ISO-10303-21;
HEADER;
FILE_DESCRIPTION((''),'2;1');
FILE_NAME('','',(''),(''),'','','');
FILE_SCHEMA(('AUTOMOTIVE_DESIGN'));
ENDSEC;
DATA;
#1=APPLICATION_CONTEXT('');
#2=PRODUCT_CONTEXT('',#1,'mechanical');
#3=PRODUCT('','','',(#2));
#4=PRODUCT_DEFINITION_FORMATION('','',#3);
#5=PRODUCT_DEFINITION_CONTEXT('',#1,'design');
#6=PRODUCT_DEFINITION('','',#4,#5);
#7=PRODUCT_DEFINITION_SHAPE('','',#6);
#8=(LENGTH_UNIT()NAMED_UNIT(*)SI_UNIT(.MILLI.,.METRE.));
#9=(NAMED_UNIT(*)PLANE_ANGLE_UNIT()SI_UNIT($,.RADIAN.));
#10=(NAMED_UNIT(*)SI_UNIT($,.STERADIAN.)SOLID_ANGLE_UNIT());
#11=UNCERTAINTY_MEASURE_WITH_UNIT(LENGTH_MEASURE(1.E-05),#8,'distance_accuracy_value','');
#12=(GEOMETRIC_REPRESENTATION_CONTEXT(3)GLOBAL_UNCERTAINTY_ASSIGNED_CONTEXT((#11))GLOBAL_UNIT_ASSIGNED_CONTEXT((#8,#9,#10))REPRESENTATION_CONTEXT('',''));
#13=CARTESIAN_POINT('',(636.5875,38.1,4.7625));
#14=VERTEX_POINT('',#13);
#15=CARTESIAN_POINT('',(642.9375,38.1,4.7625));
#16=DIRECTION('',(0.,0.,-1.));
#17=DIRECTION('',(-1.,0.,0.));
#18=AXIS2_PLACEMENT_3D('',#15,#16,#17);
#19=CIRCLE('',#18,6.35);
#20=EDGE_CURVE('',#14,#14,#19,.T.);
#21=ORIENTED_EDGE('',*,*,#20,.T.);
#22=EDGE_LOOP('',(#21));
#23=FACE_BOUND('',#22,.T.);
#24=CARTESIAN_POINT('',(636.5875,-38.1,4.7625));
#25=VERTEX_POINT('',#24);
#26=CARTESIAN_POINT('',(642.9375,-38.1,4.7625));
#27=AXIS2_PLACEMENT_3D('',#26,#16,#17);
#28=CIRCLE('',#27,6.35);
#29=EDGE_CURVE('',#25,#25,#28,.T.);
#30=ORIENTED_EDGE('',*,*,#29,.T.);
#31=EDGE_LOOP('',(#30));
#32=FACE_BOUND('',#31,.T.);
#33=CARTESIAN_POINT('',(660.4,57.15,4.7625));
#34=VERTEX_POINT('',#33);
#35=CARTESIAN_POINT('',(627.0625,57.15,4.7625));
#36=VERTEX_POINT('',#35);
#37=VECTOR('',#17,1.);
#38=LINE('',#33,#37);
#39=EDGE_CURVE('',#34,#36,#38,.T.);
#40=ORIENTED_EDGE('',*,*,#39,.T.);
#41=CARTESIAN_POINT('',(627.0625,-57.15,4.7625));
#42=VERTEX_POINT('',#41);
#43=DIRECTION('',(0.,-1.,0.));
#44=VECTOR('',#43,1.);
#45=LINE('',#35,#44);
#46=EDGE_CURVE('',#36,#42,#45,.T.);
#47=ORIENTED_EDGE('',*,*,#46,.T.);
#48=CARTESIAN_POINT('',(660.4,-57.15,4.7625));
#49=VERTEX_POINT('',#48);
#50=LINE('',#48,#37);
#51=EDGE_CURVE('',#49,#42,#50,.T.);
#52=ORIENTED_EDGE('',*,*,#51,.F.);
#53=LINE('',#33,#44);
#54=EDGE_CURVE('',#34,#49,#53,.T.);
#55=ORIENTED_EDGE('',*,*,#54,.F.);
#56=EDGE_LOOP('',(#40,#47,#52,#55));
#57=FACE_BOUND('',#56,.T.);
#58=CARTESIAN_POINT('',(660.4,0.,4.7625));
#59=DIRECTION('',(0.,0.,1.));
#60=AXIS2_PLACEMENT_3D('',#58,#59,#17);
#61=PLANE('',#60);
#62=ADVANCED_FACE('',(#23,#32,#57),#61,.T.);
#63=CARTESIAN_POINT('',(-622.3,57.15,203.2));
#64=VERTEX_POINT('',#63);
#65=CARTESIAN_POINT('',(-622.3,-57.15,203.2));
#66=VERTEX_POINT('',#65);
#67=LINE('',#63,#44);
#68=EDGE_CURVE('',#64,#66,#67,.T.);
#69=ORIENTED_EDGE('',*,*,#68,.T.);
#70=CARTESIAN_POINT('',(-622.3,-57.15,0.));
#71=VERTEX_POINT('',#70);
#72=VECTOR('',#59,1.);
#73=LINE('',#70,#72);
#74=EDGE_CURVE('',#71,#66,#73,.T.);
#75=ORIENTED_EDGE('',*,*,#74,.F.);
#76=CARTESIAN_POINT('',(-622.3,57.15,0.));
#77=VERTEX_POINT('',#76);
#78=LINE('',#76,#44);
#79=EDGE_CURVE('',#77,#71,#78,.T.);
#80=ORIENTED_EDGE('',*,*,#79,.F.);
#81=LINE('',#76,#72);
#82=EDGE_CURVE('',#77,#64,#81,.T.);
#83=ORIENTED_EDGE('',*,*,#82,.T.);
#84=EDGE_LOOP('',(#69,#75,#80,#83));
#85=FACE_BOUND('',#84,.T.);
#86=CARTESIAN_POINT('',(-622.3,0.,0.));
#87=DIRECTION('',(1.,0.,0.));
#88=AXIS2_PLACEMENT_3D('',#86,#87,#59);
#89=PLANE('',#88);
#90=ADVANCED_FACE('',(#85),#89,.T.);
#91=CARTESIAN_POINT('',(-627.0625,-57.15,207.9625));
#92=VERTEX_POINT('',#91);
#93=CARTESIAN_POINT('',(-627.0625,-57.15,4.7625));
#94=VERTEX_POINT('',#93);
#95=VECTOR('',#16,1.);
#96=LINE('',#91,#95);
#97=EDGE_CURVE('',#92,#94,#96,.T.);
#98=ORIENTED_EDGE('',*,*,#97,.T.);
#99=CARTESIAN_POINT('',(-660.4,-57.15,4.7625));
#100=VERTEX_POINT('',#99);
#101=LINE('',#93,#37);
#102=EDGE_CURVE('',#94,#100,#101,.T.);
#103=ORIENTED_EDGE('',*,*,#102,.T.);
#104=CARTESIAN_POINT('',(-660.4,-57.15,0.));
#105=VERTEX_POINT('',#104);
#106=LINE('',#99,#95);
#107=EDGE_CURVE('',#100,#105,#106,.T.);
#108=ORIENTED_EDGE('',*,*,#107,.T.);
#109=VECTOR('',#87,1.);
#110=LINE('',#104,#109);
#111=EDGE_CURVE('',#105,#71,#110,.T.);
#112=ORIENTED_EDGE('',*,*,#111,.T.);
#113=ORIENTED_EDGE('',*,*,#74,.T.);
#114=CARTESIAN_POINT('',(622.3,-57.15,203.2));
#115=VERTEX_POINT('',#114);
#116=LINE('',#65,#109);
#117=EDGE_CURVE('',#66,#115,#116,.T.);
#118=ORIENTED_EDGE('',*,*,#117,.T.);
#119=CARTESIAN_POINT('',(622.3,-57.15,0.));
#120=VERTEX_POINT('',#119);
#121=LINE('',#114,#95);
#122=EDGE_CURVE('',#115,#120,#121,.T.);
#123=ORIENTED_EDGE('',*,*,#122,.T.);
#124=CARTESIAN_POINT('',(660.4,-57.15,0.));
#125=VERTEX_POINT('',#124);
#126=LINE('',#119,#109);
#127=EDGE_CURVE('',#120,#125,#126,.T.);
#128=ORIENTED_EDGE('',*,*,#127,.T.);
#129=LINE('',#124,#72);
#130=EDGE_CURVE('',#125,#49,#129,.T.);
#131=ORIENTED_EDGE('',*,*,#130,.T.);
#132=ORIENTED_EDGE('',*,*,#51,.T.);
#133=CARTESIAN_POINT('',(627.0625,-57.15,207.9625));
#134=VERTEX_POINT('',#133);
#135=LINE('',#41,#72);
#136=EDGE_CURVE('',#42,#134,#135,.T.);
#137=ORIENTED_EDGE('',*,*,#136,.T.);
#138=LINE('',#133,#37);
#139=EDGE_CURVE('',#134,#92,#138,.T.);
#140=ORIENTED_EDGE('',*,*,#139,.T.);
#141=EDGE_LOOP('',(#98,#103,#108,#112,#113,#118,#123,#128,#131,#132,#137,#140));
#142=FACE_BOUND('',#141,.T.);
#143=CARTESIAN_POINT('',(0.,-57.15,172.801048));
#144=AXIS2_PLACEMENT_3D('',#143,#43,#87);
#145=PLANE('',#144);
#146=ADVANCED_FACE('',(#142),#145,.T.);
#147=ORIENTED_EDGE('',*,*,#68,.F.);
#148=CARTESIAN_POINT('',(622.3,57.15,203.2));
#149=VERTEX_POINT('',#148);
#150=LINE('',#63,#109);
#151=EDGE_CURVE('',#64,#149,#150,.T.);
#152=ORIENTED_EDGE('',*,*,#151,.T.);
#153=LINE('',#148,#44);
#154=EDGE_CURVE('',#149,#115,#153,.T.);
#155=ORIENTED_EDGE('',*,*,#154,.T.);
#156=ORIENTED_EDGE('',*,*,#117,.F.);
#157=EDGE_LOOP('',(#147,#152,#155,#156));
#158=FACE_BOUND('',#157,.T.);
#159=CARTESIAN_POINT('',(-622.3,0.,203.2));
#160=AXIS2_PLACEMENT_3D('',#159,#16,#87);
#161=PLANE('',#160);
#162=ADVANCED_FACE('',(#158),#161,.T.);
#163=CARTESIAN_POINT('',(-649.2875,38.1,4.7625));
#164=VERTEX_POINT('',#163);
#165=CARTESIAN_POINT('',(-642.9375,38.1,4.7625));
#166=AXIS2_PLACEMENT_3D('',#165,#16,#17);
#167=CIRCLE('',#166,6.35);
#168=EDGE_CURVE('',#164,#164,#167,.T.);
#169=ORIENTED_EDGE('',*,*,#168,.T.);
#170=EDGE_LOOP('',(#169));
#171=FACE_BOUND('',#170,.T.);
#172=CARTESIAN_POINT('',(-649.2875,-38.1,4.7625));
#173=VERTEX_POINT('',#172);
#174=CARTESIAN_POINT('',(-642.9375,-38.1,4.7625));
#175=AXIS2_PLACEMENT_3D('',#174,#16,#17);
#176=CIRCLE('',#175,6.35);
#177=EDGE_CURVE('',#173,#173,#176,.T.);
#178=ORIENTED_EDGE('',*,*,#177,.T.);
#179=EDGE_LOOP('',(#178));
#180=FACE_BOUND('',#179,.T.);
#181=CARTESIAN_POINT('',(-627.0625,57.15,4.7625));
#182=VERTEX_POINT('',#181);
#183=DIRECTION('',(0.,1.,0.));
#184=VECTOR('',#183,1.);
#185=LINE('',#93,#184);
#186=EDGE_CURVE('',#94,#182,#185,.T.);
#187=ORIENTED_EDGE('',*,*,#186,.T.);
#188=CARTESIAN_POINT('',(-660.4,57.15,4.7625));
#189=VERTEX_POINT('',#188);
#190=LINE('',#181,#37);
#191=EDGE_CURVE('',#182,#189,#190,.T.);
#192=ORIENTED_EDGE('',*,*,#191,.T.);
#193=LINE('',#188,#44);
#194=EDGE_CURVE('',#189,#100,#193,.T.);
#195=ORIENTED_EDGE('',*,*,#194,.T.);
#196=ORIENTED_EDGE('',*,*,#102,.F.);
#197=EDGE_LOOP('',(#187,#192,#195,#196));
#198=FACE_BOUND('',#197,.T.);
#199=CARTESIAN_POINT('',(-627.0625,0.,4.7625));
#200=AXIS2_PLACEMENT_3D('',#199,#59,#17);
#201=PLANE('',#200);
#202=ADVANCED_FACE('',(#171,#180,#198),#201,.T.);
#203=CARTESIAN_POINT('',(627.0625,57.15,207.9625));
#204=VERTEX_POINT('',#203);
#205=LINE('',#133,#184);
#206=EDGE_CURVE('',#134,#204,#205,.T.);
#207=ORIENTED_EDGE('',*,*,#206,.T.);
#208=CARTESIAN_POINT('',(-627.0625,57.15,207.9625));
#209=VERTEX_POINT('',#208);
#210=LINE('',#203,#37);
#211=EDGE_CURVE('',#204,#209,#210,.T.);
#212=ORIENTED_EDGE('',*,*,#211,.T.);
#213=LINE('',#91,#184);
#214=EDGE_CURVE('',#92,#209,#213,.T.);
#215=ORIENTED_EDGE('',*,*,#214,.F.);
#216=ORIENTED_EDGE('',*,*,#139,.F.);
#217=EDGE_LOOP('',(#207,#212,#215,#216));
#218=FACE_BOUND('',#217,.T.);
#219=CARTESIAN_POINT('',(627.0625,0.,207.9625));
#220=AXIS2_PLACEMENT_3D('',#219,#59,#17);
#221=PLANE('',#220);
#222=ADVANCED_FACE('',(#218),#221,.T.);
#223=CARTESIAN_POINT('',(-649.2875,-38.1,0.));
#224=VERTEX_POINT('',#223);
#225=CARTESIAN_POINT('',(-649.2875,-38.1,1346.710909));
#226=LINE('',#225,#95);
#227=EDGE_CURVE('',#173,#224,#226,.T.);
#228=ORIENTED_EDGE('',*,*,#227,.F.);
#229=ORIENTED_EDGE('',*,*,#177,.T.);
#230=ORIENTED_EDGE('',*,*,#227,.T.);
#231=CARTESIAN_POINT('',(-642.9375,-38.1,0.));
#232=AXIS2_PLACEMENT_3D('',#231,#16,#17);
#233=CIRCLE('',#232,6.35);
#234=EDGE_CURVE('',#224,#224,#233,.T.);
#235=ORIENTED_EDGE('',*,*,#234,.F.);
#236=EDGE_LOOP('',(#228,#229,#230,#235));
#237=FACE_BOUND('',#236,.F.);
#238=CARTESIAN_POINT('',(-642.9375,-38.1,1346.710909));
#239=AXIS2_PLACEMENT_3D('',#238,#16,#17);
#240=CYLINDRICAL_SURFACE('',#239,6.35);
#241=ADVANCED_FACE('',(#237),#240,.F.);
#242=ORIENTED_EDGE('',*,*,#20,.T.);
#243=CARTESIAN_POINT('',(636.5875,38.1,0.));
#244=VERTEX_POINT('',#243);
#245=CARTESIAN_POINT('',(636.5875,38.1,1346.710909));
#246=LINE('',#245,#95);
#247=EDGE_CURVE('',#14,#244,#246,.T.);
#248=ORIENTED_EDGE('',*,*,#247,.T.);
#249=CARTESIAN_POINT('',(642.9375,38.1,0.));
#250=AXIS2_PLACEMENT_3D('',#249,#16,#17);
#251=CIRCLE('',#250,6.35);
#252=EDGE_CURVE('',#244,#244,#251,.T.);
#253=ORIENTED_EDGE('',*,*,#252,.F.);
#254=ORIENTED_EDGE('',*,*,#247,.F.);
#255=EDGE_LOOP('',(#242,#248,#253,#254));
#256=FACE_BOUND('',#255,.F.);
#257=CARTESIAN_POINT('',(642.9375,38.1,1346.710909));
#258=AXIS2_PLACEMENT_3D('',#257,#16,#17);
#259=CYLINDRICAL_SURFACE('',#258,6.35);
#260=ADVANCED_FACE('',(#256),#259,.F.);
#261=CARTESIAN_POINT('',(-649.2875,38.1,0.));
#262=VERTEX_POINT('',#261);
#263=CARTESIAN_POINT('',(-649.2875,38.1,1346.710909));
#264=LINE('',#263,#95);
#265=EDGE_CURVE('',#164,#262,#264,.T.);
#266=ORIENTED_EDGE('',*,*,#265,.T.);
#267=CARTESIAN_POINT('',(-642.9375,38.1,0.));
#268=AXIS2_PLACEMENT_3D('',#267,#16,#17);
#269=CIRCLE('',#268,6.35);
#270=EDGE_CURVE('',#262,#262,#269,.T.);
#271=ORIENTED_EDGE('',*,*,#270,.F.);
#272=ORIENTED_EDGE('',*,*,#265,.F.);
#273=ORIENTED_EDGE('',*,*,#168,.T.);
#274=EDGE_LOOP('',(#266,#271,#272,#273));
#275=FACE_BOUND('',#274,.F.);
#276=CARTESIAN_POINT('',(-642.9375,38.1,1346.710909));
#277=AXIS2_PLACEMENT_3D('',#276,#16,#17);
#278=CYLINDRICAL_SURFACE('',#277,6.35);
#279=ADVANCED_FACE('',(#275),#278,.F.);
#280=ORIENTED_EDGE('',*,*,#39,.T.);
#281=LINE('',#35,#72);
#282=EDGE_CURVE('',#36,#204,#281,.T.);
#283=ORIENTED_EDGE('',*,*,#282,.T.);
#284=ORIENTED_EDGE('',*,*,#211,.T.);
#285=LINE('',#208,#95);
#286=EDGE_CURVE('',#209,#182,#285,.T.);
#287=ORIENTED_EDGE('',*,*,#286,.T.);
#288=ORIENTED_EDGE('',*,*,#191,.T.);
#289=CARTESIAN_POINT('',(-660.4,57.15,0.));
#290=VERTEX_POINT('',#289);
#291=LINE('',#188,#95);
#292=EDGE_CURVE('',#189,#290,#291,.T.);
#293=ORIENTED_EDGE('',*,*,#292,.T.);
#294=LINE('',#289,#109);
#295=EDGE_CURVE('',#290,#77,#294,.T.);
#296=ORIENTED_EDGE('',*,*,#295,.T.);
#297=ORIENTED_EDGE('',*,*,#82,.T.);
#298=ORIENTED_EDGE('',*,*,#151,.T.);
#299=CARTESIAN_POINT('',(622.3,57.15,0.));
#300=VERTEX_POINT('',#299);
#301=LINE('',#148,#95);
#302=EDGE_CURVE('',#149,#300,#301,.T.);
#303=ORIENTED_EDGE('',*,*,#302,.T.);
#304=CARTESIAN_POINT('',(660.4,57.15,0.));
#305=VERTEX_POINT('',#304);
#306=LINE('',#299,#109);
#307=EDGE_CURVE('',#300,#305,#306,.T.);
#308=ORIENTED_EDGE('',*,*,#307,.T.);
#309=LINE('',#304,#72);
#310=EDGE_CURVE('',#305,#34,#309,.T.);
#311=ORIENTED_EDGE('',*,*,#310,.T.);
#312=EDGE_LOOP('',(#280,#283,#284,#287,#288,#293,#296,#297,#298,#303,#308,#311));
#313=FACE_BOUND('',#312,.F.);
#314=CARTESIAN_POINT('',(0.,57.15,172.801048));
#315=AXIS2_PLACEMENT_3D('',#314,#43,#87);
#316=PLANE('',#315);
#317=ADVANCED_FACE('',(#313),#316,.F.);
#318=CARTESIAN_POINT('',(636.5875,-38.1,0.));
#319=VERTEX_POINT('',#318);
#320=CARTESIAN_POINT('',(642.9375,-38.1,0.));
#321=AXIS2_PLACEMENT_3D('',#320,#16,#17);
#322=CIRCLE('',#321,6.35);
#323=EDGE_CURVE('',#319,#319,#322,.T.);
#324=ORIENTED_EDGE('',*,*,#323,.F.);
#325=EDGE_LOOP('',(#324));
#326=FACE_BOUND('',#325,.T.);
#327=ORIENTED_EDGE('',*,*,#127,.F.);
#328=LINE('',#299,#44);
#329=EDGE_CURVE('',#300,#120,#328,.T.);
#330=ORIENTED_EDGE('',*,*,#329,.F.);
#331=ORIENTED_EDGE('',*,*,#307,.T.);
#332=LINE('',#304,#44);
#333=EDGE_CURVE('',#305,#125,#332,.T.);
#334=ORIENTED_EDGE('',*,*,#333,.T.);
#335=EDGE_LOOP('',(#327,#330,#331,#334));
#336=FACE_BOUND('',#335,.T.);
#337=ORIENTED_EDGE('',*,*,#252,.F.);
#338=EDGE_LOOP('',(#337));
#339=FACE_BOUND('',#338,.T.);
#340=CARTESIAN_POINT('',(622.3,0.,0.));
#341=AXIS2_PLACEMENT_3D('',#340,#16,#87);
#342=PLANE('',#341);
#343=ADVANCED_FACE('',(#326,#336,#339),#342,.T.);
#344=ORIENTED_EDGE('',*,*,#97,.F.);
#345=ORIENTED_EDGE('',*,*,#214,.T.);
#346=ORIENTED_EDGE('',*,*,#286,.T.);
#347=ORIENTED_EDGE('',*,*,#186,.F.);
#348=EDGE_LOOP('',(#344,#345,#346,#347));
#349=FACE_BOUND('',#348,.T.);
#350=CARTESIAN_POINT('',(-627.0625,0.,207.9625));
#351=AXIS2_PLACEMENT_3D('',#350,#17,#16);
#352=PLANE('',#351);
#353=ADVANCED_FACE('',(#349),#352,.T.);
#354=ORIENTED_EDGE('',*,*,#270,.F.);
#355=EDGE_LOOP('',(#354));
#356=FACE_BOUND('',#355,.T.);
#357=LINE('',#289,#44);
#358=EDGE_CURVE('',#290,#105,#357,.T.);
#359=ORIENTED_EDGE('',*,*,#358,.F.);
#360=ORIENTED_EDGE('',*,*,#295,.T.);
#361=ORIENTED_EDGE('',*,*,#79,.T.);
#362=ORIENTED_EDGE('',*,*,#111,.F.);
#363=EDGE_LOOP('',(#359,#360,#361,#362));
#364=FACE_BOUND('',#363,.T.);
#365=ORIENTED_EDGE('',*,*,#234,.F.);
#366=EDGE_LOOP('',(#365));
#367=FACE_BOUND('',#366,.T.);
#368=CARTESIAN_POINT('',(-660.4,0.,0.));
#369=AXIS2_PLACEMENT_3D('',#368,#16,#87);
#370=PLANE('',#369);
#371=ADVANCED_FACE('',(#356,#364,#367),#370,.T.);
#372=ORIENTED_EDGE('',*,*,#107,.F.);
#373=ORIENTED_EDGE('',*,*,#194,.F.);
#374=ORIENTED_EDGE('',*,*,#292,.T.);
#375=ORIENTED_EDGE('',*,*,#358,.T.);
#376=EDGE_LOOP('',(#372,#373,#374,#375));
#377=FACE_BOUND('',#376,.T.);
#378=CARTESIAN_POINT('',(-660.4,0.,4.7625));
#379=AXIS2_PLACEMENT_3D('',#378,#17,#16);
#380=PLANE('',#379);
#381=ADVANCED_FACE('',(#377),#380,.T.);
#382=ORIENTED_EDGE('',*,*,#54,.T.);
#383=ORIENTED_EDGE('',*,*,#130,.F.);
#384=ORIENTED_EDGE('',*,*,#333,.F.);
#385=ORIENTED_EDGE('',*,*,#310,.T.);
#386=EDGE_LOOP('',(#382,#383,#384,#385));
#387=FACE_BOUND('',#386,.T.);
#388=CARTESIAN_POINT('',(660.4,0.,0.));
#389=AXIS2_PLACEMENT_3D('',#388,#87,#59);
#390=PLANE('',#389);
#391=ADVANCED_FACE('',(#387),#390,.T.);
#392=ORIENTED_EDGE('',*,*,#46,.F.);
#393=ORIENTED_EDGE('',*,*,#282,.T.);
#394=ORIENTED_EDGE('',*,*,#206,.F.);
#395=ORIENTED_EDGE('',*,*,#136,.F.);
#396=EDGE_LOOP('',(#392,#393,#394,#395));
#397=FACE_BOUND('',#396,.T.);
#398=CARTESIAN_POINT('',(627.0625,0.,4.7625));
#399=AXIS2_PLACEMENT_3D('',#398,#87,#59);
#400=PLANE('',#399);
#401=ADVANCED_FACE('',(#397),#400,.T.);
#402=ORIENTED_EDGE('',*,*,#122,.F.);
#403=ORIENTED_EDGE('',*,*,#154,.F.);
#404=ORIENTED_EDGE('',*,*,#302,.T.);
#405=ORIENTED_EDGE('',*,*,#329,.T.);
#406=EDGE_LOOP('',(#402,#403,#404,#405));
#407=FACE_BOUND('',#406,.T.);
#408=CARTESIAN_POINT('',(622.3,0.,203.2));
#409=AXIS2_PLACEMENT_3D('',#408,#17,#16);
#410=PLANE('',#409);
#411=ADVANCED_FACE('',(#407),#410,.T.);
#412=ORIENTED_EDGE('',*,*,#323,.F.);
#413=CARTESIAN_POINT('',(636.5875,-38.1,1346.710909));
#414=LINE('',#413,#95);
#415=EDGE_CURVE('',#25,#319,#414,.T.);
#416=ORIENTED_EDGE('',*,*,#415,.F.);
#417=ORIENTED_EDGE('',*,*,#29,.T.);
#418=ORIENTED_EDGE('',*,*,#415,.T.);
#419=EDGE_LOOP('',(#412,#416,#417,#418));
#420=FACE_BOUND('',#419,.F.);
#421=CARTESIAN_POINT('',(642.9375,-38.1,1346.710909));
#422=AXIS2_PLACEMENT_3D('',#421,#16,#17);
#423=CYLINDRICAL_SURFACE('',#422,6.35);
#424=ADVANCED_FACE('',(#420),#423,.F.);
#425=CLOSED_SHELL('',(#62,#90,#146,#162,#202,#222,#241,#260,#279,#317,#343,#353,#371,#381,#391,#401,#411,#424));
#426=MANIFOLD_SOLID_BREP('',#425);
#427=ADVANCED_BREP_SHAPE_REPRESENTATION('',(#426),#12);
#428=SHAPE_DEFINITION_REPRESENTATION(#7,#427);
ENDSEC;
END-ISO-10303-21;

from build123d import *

# Parameters (mm, degrees)
F1_DEPTH = 57.15
F3_D     = 12.7


# Not quite as in the source:
# - a length typed as a fraction of an inch, garbled in the dataset ("3 / 203.2 mm" for 3/8 in), is restored


with BuildPart() as f1:
    # F0 (on Front) → F1 (new body, symmetric)
    with BuildSketch(Plane.XZ):
        Polygon((-627.0625, 4.7625), (-660.4, 4.7625), (-660.4, 0), (-622.3, 0), (-622.3, 203.2), (622.3, 203.2), (622.3, 0), (660.4, 0), (660.4, 4.7625), (627.0625, 4.7625), (627.0625, 207.9625), (-627.0625, 207.9625), align=None)
    extrude(amount=F1_DEPTH, both=True)

    # F3 (through all)
    with Locations(Plane.XY.offset(4.7625)):
        with Locations((-642.9375, 38.1), (-642.9375, -38.1), (642.9375, 38.1), (642.9375, -38.1)):
            Hole(F3_D / 2)


solid = f1.part
